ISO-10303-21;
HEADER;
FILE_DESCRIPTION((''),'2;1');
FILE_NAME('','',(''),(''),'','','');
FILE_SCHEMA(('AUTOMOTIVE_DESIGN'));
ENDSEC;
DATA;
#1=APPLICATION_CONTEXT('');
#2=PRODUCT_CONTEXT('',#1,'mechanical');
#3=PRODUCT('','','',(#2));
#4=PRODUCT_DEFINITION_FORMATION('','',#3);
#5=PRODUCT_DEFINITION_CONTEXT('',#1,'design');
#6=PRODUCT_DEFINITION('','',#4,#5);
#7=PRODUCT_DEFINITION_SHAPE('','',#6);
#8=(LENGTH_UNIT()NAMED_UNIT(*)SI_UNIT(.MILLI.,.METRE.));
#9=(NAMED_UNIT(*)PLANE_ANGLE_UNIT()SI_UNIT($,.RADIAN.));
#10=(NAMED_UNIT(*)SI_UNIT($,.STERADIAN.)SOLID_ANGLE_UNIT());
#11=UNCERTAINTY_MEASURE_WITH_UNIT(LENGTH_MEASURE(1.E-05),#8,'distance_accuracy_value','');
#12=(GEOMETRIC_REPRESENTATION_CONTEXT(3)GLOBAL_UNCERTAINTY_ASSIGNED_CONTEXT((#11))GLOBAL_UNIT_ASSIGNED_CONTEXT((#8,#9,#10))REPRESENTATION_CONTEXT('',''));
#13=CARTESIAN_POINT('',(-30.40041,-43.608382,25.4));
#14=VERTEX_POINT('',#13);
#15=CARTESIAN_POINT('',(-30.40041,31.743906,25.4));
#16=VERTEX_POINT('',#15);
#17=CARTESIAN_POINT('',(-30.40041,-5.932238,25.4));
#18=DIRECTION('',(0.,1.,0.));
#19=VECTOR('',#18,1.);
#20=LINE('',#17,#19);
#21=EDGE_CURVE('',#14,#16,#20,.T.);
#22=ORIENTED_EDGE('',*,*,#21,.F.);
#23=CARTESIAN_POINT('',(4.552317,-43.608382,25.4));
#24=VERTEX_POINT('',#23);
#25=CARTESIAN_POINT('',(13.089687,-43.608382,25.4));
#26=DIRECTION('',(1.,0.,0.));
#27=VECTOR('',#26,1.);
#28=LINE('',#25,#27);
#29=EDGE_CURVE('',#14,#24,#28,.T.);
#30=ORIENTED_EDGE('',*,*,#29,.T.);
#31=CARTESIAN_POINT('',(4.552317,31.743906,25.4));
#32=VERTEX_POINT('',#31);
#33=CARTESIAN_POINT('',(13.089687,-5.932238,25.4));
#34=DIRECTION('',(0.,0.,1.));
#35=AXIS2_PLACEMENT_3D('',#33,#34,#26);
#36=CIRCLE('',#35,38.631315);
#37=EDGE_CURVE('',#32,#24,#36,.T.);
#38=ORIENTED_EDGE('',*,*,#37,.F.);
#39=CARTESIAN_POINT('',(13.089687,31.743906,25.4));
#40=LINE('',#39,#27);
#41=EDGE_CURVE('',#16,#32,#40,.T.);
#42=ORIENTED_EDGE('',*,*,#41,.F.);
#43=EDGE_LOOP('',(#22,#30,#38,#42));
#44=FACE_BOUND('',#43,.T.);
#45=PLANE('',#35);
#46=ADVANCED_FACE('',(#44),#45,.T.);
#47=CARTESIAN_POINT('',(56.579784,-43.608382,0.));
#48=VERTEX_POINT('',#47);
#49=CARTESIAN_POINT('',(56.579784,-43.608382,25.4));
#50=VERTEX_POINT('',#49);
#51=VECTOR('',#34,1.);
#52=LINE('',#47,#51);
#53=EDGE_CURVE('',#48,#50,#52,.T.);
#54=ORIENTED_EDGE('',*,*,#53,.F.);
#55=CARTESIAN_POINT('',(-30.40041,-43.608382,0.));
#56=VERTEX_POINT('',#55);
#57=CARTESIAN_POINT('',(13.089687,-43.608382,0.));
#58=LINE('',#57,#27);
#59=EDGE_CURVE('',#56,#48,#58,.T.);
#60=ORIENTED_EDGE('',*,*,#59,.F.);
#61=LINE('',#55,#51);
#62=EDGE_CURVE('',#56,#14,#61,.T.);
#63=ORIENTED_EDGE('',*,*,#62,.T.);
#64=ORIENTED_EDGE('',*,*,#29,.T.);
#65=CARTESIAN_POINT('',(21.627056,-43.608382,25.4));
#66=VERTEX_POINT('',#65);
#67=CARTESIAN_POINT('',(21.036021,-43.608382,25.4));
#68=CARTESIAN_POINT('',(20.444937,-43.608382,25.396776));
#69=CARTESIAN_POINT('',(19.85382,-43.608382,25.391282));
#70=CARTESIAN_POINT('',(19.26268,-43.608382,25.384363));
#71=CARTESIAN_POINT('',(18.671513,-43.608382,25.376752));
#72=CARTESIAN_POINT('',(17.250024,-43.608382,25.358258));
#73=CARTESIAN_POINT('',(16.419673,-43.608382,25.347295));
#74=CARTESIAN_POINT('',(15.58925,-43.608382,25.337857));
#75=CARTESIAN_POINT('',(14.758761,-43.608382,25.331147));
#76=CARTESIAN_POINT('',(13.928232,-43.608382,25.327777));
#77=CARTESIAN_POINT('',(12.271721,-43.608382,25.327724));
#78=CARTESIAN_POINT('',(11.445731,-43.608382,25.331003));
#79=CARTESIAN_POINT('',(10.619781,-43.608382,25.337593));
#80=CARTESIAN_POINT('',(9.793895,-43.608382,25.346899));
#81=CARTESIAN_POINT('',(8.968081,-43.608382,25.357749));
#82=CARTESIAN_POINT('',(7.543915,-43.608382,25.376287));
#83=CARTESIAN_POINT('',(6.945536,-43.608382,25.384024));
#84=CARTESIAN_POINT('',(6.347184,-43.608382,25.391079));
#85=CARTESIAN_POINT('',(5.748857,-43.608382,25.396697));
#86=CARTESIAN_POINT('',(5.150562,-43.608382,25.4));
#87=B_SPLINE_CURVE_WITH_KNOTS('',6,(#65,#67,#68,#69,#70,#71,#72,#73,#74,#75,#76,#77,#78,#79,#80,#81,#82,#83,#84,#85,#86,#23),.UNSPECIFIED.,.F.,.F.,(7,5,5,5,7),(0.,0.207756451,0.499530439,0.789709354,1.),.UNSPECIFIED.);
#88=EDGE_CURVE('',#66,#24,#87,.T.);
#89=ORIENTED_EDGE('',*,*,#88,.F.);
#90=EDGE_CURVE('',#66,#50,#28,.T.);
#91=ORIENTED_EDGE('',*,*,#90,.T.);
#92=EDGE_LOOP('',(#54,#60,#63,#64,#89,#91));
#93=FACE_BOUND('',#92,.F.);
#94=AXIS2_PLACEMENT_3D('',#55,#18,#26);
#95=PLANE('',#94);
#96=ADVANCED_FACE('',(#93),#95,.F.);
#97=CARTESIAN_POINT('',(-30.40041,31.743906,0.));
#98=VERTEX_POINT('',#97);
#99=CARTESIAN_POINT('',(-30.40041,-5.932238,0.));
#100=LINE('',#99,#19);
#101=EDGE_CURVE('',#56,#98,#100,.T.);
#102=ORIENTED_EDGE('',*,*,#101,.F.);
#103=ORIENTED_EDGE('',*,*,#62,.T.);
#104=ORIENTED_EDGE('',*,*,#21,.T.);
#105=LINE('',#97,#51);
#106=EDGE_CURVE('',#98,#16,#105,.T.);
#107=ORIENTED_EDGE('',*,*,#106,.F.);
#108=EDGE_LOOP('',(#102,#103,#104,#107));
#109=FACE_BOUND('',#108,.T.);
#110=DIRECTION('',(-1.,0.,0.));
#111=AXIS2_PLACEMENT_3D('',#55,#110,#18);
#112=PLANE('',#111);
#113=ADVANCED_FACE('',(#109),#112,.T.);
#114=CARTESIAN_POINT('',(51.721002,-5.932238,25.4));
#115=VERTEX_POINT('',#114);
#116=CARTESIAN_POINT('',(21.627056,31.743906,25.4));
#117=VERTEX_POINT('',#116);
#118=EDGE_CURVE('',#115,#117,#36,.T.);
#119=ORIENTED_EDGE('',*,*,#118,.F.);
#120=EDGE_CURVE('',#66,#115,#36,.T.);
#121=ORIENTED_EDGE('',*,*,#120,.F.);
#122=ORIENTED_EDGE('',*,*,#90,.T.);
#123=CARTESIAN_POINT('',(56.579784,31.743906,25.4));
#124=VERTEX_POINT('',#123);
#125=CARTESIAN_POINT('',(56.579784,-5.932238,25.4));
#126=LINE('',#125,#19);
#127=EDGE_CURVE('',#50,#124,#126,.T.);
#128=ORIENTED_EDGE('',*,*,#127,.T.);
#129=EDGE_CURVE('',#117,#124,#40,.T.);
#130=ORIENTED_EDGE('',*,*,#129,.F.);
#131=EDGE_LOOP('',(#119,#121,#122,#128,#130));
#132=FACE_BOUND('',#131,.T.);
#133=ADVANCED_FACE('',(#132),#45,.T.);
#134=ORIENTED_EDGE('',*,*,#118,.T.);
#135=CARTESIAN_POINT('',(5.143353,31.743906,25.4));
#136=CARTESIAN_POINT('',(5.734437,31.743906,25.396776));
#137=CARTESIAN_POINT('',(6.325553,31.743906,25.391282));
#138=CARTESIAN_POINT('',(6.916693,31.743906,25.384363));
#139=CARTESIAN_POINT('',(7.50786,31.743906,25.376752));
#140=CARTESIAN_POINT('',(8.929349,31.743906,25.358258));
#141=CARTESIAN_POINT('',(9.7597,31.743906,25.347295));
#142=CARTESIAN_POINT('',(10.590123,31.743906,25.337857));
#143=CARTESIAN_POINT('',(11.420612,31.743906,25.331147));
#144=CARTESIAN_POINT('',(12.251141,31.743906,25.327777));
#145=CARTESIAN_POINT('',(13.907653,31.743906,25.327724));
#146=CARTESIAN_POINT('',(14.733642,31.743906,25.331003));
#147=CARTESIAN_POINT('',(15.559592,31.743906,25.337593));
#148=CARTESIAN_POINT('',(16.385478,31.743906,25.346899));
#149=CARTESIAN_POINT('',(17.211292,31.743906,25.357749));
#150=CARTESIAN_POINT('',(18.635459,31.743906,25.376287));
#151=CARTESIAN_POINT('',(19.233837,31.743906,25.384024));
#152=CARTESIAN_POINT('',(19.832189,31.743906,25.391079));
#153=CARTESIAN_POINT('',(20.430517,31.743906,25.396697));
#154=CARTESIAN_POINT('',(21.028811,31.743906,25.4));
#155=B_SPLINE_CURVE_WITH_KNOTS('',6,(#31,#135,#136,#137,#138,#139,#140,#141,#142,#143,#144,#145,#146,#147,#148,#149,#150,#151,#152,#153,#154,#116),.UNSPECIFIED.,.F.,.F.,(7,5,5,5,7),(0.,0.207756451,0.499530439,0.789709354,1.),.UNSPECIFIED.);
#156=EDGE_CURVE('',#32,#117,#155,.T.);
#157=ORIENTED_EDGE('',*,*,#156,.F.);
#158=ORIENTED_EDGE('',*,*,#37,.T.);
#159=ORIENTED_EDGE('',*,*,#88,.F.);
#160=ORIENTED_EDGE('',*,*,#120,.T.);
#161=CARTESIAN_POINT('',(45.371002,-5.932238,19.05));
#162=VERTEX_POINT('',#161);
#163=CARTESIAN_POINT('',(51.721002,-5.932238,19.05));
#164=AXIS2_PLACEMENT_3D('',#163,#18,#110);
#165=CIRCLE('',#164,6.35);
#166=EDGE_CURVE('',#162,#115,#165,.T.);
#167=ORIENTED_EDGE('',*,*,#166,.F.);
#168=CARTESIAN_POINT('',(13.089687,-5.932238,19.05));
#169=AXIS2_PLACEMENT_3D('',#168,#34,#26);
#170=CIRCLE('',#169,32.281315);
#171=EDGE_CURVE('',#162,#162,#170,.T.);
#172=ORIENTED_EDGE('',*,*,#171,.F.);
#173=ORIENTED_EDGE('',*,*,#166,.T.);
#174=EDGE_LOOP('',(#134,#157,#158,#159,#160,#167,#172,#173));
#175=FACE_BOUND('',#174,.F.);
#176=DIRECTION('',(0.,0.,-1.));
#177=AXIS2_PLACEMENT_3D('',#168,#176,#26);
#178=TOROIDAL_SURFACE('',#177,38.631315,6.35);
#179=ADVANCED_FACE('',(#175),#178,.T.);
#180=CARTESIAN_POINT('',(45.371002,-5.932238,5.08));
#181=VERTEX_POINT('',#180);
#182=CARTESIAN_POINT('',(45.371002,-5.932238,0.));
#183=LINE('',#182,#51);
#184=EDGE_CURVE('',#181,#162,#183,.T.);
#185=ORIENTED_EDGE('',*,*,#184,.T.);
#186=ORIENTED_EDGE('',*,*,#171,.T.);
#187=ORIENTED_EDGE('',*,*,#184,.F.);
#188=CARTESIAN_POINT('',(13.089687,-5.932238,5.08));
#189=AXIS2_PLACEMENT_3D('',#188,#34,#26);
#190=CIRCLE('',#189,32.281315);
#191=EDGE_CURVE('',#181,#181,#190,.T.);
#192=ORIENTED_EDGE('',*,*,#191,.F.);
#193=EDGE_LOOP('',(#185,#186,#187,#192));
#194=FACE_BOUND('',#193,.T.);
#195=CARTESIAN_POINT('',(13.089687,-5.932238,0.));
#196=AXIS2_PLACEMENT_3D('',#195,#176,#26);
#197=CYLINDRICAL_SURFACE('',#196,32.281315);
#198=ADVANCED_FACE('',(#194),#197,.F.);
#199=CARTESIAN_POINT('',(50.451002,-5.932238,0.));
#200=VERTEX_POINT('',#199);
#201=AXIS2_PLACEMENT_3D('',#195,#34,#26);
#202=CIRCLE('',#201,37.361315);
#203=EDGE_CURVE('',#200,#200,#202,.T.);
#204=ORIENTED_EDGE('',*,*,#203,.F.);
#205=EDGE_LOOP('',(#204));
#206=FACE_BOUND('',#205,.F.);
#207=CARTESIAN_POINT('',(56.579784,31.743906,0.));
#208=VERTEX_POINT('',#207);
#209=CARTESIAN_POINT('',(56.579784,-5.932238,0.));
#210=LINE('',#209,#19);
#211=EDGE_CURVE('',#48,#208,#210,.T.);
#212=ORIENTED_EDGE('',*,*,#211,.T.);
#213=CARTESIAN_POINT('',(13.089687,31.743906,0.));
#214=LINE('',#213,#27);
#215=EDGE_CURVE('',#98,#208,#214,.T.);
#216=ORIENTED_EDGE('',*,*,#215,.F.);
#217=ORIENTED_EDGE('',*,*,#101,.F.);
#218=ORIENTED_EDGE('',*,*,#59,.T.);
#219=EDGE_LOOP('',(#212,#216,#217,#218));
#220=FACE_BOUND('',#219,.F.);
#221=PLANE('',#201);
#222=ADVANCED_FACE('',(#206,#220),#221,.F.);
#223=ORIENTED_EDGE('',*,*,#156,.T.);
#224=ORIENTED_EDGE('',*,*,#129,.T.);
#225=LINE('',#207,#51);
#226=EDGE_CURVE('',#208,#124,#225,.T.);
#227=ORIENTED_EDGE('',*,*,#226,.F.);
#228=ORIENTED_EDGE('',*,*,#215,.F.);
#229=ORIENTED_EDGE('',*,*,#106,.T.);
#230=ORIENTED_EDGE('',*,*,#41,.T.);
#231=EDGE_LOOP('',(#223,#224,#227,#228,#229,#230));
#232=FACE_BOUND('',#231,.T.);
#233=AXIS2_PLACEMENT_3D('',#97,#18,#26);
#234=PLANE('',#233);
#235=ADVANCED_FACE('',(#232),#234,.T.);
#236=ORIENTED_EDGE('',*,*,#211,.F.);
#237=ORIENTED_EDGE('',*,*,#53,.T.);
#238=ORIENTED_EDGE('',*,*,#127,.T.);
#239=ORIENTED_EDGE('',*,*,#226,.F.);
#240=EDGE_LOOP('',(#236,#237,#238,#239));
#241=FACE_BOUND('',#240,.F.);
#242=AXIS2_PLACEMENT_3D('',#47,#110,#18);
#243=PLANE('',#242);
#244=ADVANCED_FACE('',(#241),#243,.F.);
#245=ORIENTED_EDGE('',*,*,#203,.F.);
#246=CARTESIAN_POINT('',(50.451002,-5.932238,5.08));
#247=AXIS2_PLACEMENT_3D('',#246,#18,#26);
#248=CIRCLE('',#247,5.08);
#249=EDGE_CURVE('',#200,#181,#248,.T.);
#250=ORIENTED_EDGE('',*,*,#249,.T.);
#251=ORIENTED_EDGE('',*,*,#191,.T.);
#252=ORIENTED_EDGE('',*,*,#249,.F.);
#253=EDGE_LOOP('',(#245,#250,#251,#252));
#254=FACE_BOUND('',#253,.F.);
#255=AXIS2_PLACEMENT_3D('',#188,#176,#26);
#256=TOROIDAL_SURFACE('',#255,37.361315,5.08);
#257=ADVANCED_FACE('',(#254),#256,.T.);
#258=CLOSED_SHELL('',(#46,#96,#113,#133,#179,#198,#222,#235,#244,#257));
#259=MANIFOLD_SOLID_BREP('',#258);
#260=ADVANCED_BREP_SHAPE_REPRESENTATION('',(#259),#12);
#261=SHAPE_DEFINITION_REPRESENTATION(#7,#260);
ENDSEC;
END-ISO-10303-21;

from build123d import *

# Parameters (mm, degrees)
F0_W     = 86.9801938534
F0_H     = 75.3522887826
F0_R     = 32.2813153837
F1_DEPTH = 25.4
F3_R     = 5.08


# Not quite as in the source:
# - a fillet or chamfer that OpenCascade refuses, or shapes differently, is made with other operations: its cross-section is extruded or revolved along the edge and cut away or added


with BuildPart() as f1:
    # F0 (on Top) → F1 (new body)
    with BuildSketch(Plane.XY):
        with Locations((13.0896866322, -5.9322379529)):
            Rectangle(F0_W, F0_H)
        with Locations((13.0896866322, -5.9322379529)):
            Circle(F0_R, mode=Mode.SUBTRACT)
    extrude(amount=F1_DEPTH)

    # F2: fillet of radius 6.35 on 1 edges, made by hand

    # F2_s1 → F2_t2 (revolve, cut)
    with BuildSketch(Plane.XZ.offset(5.9322379529)):
        with BuildLine():
            ThreePointArc((45.3710020159, 19.05), (47.2308739553, 23.5401280605), (51.7210020159, 25.4))
            Line((51.7210020159, 25.4), (45.3710020159, 25.4))
            Line((45.3710020159, 25.4), (45.3710020159, 19.05))
        make_face()
    revolve(axis=Axis((13.0896866322, -5.9322379529, 25.4), (0, 0, 1)), mode=Mode.SUBTRACT)

    # F3
    f3_edges = [f1.edges().sort_by_distance(p)[0] for p in [
        (-19.191629, -5.932238, 0),
    ]]
    fillet(f3_edges, radius=F3_R)


solid = f1.part
